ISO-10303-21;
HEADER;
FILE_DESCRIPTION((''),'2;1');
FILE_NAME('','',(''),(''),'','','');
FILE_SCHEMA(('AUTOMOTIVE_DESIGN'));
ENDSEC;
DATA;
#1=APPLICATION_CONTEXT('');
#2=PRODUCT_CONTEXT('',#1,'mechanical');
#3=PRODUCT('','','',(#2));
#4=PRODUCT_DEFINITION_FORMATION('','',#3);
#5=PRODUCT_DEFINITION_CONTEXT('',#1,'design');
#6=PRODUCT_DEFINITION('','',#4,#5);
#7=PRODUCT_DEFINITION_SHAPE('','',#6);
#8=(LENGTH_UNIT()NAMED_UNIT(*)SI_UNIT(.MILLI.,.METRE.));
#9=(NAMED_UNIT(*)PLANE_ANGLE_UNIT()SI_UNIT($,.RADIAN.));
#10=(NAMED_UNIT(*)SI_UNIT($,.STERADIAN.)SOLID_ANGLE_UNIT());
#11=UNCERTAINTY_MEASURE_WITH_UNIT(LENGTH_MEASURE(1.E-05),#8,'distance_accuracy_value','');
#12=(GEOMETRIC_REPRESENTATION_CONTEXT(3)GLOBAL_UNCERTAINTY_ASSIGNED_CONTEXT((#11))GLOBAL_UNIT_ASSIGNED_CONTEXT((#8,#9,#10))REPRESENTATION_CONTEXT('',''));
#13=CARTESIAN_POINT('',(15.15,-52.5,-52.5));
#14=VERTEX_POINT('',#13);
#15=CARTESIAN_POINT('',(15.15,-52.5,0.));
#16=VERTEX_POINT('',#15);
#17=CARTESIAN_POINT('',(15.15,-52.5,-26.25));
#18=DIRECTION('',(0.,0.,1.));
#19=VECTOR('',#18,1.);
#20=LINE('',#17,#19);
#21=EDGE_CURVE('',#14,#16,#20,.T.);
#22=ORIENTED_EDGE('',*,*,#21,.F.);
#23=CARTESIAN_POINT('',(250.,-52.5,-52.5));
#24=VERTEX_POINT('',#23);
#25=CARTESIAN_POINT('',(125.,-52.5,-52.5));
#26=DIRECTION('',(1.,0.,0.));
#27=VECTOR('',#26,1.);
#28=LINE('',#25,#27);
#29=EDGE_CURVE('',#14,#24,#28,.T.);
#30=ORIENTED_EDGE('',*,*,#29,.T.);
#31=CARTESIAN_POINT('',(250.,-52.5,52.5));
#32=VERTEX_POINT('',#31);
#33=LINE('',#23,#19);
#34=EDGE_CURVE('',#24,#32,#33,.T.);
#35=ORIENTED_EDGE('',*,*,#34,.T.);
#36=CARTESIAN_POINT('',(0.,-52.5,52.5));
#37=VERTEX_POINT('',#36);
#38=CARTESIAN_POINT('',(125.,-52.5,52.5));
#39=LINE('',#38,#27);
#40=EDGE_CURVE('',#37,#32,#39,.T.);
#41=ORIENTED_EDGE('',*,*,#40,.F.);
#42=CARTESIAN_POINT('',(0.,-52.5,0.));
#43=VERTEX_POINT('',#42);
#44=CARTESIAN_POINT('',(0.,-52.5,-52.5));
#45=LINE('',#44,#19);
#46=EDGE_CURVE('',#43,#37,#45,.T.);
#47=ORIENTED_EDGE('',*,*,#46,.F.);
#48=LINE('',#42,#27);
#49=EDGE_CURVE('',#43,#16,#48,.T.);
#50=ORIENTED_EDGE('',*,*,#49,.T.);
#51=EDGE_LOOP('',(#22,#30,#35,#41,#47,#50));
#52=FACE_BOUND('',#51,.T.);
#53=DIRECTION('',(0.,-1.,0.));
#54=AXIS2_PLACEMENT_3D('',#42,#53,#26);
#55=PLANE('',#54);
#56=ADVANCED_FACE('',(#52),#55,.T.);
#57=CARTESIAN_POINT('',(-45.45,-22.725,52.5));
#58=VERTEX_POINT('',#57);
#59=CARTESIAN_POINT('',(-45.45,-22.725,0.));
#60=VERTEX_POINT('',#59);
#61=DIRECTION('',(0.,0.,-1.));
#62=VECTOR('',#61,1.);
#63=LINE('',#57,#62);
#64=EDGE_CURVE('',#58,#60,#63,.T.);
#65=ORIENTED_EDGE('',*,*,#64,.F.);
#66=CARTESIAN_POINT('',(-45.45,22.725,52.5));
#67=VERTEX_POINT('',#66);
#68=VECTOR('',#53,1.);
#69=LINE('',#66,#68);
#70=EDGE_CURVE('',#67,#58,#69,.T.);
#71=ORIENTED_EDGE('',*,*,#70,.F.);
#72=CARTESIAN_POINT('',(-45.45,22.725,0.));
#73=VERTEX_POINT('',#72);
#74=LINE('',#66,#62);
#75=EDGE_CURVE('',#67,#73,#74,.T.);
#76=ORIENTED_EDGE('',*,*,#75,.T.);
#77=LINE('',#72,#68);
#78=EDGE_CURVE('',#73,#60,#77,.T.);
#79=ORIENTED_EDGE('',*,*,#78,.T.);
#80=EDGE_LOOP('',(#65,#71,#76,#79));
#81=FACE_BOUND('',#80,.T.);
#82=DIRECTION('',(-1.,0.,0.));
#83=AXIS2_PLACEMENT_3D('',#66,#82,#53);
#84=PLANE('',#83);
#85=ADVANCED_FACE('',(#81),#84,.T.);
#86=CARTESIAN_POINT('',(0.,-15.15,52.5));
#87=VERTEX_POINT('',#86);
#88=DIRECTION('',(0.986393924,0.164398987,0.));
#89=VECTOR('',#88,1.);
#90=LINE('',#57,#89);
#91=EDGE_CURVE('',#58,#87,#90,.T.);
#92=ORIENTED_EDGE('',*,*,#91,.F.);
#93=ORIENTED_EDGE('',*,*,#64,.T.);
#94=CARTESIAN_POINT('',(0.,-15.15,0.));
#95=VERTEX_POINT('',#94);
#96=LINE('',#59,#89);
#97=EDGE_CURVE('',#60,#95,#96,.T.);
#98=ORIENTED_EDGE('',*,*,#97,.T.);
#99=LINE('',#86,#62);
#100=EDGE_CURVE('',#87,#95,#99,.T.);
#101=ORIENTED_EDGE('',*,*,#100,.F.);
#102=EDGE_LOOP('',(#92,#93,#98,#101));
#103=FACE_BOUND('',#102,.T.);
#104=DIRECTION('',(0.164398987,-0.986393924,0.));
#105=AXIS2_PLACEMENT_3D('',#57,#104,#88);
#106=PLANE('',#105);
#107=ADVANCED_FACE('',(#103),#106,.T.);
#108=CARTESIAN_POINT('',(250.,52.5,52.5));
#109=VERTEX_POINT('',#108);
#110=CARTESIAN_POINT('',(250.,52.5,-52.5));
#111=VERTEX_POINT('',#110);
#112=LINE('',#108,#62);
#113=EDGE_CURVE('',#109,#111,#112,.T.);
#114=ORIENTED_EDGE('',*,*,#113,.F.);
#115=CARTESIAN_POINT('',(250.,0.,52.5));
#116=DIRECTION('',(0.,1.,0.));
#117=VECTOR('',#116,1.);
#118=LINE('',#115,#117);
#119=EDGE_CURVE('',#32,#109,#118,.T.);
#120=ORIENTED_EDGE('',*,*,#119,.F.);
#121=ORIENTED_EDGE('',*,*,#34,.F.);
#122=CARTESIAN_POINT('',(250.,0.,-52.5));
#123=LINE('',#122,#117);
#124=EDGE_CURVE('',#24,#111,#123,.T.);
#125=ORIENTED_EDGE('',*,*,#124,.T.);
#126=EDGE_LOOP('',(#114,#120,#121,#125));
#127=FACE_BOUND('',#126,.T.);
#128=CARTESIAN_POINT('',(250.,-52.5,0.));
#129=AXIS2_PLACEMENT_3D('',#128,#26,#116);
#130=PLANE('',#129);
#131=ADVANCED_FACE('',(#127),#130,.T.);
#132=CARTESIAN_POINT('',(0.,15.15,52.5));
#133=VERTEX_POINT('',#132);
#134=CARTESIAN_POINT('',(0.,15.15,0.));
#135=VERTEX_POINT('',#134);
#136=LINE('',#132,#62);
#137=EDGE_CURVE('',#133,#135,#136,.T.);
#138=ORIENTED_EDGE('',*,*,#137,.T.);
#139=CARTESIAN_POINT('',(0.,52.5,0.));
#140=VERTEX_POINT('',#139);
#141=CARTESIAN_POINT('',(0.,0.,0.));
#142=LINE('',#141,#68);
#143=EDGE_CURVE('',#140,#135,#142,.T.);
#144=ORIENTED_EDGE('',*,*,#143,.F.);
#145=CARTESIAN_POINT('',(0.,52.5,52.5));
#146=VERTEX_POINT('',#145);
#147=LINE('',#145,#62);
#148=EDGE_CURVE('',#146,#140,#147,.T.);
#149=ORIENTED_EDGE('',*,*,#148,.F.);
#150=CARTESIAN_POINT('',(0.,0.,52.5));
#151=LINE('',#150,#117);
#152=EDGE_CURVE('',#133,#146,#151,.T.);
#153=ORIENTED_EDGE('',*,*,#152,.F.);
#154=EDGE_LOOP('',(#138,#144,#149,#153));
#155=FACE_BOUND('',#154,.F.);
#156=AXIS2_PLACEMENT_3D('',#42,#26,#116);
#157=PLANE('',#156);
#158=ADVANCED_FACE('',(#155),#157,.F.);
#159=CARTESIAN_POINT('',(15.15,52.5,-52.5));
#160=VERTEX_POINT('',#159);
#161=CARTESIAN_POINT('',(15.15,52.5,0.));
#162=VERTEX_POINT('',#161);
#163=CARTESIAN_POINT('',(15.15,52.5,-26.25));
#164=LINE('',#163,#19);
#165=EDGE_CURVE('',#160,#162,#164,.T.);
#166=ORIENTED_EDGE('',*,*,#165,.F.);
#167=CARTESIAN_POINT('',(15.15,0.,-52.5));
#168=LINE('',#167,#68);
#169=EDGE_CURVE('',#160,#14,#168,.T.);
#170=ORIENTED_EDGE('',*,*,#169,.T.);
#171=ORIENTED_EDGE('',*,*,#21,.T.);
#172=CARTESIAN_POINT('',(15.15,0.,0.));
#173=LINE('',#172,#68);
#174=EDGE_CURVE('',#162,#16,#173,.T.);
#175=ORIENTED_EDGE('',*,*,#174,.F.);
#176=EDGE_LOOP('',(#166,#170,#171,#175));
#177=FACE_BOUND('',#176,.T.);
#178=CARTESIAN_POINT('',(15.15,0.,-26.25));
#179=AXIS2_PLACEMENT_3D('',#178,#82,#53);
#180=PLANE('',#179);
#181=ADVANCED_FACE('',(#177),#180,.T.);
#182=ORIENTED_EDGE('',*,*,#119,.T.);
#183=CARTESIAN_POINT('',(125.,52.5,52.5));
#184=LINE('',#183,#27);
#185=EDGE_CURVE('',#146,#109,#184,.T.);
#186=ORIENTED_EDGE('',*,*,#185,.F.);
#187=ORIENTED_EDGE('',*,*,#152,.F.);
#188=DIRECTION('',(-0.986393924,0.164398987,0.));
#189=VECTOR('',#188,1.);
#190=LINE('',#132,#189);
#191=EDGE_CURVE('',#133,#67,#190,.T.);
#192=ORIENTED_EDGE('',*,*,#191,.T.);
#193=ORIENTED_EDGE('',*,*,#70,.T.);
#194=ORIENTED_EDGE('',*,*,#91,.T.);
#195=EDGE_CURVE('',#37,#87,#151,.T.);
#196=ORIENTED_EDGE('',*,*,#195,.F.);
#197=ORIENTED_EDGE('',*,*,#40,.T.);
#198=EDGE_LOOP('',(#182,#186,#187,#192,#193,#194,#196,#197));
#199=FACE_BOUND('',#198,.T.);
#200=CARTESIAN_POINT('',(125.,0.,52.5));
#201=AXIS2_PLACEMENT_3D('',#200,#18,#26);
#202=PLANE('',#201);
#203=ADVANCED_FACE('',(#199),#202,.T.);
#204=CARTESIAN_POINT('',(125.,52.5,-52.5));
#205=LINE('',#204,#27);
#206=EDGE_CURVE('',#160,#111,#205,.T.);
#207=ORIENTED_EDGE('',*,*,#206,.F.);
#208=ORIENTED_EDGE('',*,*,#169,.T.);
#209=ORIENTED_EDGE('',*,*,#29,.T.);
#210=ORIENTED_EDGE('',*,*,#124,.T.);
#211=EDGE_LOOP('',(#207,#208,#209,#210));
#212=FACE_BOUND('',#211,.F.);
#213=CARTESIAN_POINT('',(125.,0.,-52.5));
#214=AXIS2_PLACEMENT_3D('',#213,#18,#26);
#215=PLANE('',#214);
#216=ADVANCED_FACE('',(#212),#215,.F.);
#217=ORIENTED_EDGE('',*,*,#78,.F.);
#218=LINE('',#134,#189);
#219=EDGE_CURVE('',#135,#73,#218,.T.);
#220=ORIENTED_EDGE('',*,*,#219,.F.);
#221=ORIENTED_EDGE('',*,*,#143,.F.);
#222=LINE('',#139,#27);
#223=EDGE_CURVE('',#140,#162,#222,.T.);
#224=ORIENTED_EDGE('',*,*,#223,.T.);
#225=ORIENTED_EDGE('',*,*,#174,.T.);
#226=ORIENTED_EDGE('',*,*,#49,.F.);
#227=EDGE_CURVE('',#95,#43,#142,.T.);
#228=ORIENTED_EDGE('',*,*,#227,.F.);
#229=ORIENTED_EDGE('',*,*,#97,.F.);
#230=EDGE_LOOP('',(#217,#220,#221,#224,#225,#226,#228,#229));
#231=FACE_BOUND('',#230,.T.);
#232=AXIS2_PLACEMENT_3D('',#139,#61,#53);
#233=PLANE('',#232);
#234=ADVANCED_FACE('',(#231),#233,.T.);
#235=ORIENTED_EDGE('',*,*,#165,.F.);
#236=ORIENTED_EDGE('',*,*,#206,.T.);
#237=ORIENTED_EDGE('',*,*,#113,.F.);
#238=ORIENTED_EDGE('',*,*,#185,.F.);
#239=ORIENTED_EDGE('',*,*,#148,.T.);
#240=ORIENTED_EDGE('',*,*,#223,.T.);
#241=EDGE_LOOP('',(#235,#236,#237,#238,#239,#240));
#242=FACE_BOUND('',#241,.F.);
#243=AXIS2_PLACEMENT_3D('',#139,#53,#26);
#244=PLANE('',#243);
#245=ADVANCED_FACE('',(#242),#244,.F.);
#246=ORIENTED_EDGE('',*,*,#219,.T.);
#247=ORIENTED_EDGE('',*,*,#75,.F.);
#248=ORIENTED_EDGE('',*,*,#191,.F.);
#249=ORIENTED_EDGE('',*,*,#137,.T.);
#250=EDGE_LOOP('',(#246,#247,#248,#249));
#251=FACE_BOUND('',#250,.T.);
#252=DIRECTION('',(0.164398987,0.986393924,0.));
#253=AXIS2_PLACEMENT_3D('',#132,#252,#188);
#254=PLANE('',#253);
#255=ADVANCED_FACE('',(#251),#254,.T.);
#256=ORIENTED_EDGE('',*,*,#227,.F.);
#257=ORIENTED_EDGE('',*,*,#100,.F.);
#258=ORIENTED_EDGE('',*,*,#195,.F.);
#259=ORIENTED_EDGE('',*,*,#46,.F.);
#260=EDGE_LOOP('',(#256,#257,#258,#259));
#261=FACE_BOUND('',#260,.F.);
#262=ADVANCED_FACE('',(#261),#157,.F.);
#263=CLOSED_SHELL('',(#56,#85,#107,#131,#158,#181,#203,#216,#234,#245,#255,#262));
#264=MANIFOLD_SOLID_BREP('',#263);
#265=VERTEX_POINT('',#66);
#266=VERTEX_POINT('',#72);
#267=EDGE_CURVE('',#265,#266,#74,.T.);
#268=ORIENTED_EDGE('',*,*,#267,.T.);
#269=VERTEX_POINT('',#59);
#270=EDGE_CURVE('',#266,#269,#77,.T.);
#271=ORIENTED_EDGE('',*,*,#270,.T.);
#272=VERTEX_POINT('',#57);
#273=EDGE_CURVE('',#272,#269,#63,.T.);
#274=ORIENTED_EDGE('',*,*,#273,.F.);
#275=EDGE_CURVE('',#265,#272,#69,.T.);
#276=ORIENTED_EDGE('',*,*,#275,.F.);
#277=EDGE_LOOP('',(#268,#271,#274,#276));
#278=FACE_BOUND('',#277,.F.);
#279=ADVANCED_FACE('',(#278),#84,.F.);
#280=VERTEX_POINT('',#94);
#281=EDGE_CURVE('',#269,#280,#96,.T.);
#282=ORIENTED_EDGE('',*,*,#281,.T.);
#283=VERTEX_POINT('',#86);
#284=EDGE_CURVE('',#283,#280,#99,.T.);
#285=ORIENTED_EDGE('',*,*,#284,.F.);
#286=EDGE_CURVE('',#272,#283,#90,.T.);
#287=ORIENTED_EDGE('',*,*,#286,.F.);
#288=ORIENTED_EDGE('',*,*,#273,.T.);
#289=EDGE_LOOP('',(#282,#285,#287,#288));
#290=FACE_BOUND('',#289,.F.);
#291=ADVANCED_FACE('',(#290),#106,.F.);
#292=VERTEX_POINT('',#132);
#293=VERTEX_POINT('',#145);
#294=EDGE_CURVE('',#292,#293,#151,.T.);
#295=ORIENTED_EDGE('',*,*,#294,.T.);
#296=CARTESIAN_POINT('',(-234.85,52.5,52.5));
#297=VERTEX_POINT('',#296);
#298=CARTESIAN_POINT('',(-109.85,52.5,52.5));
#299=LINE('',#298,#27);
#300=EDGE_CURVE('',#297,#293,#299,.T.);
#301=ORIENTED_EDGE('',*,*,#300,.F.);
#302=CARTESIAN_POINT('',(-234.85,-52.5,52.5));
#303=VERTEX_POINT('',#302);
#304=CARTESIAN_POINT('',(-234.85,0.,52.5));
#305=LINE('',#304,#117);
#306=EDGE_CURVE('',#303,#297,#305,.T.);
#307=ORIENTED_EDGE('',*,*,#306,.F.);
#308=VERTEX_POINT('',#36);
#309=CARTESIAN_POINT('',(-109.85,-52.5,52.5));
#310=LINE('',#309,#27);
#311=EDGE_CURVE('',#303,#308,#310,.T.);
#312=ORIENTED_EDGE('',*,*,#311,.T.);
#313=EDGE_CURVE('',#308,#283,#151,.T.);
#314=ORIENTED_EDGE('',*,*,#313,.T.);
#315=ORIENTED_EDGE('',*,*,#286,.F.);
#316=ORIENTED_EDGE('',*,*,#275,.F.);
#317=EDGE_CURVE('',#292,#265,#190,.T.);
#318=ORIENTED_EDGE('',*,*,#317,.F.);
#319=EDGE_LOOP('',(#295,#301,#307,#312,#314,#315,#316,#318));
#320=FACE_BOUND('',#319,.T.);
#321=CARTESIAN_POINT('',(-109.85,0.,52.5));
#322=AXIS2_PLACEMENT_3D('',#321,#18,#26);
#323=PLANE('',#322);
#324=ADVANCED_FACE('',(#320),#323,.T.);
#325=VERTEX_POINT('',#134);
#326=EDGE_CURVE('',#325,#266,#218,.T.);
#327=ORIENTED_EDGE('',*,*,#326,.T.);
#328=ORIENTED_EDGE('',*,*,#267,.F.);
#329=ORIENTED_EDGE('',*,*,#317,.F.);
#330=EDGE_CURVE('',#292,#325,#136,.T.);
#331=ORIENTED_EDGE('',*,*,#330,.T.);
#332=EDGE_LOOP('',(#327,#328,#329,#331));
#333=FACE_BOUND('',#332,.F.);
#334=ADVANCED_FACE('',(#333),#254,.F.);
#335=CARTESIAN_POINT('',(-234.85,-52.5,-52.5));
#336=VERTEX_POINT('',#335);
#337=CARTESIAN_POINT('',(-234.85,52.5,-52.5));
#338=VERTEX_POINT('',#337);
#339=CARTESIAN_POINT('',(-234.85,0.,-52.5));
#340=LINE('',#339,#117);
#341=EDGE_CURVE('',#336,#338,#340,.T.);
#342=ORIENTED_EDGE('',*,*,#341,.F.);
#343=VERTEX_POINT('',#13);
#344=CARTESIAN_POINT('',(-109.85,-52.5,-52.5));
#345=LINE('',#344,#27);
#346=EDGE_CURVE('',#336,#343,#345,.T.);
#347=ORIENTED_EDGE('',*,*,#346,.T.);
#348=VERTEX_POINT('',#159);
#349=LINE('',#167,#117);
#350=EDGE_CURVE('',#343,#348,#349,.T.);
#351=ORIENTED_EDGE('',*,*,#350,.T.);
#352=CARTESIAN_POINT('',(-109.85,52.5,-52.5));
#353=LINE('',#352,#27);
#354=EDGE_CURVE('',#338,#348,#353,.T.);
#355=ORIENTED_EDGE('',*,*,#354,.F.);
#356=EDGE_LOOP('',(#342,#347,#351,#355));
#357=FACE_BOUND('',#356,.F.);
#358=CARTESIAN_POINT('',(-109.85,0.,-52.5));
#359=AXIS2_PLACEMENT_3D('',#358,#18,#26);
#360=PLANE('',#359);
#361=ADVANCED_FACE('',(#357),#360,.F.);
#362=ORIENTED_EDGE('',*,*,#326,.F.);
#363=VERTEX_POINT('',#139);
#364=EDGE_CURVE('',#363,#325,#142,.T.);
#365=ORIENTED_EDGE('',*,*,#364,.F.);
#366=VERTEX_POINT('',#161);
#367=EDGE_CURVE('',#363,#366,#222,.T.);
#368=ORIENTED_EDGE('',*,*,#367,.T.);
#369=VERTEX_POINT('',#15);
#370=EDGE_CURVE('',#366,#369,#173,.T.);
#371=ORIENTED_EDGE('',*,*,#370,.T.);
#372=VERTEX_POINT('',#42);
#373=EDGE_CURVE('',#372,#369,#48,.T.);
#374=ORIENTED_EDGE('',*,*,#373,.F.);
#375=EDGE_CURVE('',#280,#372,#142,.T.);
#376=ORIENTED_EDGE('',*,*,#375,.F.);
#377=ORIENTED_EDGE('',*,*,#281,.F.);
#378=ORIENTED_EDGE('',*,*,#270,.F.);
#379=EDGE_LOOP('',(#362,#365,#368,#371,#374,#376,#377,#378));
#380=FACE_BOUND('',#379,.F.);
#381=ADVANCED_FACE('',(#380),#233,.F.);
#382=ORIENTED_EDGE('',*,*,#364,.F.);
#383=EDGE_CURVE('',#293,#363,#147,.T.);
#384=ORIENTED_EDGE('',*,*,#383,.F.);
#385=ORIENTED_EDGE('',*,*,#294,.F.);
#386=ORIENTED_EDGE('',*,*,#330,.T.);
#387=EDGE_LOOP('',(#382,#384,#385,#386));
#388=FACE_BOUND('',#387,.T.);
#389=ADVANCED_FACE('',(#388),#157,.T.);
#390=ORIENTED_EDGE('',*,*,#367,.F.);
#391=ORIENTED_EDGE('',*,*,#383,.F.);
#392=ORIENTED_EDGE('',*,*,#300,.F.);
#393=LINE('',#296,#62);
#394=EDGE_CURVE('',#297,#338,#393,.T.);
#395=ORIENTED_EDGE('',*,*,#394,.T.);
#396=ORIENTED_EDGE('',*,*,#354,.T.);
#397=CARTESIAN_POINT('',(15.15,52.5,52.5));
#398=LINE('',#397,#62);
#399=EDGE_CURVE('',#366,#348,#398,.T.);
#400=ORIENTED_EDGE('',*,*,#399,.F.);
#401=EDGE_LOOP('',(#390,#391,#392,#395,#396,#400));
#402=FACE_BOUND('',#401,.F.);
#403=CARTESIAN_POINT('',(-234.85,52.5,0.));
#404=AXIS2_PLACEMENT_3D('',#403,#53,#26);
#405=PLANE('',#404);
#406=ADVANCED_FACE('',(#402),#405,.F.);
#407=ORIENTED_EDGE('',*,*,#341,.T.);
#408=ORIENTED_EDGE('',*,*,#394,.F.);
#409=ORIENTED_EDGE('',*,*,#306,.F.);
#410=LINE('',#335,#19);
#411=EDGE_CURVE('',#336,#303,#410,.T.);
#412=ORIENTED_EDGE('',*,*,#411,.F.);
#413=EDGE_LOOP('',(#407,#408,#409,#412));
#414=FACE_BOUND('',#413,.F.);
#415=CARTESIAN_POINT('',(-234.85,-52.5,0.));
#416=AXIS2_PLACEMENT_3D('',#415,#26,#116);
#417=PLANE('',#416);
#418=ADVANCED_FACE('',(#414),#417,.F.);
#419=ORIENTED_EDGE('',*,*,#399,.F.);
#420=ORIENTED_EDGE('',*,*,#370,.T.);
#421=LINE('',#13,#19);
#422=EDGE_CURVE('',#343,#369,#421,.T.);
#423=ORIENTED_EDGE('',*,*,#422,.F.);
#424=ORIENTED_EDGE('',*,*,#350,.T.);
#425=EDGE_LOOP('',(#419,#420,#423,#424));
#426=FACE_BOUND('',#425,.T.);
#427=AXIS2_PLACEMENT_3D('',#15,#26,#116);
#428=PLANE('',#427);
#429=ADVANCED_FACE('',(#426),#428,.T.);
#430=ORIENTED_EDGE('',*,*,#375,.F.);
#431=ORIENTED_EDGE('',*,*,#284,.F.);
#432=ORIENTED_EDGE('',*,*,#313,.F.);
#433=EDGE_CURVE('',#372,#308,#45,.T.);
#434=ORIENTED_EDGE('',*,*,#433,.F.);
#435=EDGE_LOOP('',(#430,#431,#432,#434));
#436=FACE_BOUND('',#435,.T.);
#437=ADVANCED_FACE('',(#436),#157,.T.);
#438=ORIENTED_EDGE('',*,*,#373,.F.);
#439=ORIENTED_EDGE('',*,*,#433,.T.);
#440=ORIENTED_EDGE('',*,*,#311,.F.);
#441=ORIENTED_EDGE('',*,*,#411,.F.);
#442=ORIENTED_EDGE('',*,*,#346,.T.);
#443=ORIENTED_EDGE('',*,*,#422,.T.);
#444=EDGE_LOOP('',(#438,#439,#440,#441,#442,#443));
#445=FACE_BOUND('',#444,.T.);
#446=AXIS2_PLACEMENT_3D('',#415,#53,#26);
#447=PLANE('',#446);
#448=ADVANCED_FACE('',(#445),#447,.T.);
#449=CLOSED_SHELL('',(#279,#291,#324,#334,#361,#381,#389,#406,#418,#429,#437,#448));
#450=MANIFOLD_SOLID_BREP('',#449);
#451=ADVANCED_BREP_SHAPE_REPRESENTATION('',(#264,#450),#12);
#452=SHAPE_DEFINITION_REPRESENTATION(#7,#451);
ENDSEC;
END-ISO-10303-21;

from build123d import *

# Parameters (mm, degrees)
F0_W          = 250
F0_H          = 105
F1_DEPTH      = 52.5
F2_W          = 105
F2_H          = 52.5
F3_DEPTH      = 15.15
F5_DEPTH      = 52.5
F6_W          = 250
F6_H          = 105
F7_DEPTH      = 52.5
F7_DEPTH_BACK = 52.5


with BuildPart() as f1:
    # F0 (on Top) → F1 (new body, symmetric)
    with BuildSketch(Plane.XY):
        with Locations((125, 0)):
            Rectangle(F0_W, F0_H)
    extrude(amount=F1_DEPTH, both=True)

    # F2 (on face) → F3 (cut)
    with BuildSketch(Plane(origin=(0, 0, 0), x_dir=(0, -1, 0), z_dir=(-1, 0, 0))):
        with Locations((0, -26.25)):
            Rectangle(F2_W, F2_H)
    extrude(amount=-F3_DEPTH, mode=Mode.SUBTRACT)

    # F4 (on face) → F5 (join, through all)
    with BuildSketch(Plane.XY.offset(52.5)):
        Polygon((0, -15.15), (0, 15.15), (-45.45, 22.725), (-45.45, -22.725), align=None)
    extrude(amount=-F5_DEPTH)


with BuildPart() as f7:
    # F6 (on Top) → F7 (new body, two sides)
    with BuildSketch(Plane.XY) as f7_sk:
        with Locations((-109.85, 0)):
            Rectangle(F6_W, F6_H)
    extrude(amount=F7_DEPTH)
    extrude(f7_sk.sketch, amount=-F7_DEPTH_BACK)

    # F8: cut F1
    add(f1.part, mode=Mode.SUBTRACT)


solid = Compound([f1.part, f7.part])
